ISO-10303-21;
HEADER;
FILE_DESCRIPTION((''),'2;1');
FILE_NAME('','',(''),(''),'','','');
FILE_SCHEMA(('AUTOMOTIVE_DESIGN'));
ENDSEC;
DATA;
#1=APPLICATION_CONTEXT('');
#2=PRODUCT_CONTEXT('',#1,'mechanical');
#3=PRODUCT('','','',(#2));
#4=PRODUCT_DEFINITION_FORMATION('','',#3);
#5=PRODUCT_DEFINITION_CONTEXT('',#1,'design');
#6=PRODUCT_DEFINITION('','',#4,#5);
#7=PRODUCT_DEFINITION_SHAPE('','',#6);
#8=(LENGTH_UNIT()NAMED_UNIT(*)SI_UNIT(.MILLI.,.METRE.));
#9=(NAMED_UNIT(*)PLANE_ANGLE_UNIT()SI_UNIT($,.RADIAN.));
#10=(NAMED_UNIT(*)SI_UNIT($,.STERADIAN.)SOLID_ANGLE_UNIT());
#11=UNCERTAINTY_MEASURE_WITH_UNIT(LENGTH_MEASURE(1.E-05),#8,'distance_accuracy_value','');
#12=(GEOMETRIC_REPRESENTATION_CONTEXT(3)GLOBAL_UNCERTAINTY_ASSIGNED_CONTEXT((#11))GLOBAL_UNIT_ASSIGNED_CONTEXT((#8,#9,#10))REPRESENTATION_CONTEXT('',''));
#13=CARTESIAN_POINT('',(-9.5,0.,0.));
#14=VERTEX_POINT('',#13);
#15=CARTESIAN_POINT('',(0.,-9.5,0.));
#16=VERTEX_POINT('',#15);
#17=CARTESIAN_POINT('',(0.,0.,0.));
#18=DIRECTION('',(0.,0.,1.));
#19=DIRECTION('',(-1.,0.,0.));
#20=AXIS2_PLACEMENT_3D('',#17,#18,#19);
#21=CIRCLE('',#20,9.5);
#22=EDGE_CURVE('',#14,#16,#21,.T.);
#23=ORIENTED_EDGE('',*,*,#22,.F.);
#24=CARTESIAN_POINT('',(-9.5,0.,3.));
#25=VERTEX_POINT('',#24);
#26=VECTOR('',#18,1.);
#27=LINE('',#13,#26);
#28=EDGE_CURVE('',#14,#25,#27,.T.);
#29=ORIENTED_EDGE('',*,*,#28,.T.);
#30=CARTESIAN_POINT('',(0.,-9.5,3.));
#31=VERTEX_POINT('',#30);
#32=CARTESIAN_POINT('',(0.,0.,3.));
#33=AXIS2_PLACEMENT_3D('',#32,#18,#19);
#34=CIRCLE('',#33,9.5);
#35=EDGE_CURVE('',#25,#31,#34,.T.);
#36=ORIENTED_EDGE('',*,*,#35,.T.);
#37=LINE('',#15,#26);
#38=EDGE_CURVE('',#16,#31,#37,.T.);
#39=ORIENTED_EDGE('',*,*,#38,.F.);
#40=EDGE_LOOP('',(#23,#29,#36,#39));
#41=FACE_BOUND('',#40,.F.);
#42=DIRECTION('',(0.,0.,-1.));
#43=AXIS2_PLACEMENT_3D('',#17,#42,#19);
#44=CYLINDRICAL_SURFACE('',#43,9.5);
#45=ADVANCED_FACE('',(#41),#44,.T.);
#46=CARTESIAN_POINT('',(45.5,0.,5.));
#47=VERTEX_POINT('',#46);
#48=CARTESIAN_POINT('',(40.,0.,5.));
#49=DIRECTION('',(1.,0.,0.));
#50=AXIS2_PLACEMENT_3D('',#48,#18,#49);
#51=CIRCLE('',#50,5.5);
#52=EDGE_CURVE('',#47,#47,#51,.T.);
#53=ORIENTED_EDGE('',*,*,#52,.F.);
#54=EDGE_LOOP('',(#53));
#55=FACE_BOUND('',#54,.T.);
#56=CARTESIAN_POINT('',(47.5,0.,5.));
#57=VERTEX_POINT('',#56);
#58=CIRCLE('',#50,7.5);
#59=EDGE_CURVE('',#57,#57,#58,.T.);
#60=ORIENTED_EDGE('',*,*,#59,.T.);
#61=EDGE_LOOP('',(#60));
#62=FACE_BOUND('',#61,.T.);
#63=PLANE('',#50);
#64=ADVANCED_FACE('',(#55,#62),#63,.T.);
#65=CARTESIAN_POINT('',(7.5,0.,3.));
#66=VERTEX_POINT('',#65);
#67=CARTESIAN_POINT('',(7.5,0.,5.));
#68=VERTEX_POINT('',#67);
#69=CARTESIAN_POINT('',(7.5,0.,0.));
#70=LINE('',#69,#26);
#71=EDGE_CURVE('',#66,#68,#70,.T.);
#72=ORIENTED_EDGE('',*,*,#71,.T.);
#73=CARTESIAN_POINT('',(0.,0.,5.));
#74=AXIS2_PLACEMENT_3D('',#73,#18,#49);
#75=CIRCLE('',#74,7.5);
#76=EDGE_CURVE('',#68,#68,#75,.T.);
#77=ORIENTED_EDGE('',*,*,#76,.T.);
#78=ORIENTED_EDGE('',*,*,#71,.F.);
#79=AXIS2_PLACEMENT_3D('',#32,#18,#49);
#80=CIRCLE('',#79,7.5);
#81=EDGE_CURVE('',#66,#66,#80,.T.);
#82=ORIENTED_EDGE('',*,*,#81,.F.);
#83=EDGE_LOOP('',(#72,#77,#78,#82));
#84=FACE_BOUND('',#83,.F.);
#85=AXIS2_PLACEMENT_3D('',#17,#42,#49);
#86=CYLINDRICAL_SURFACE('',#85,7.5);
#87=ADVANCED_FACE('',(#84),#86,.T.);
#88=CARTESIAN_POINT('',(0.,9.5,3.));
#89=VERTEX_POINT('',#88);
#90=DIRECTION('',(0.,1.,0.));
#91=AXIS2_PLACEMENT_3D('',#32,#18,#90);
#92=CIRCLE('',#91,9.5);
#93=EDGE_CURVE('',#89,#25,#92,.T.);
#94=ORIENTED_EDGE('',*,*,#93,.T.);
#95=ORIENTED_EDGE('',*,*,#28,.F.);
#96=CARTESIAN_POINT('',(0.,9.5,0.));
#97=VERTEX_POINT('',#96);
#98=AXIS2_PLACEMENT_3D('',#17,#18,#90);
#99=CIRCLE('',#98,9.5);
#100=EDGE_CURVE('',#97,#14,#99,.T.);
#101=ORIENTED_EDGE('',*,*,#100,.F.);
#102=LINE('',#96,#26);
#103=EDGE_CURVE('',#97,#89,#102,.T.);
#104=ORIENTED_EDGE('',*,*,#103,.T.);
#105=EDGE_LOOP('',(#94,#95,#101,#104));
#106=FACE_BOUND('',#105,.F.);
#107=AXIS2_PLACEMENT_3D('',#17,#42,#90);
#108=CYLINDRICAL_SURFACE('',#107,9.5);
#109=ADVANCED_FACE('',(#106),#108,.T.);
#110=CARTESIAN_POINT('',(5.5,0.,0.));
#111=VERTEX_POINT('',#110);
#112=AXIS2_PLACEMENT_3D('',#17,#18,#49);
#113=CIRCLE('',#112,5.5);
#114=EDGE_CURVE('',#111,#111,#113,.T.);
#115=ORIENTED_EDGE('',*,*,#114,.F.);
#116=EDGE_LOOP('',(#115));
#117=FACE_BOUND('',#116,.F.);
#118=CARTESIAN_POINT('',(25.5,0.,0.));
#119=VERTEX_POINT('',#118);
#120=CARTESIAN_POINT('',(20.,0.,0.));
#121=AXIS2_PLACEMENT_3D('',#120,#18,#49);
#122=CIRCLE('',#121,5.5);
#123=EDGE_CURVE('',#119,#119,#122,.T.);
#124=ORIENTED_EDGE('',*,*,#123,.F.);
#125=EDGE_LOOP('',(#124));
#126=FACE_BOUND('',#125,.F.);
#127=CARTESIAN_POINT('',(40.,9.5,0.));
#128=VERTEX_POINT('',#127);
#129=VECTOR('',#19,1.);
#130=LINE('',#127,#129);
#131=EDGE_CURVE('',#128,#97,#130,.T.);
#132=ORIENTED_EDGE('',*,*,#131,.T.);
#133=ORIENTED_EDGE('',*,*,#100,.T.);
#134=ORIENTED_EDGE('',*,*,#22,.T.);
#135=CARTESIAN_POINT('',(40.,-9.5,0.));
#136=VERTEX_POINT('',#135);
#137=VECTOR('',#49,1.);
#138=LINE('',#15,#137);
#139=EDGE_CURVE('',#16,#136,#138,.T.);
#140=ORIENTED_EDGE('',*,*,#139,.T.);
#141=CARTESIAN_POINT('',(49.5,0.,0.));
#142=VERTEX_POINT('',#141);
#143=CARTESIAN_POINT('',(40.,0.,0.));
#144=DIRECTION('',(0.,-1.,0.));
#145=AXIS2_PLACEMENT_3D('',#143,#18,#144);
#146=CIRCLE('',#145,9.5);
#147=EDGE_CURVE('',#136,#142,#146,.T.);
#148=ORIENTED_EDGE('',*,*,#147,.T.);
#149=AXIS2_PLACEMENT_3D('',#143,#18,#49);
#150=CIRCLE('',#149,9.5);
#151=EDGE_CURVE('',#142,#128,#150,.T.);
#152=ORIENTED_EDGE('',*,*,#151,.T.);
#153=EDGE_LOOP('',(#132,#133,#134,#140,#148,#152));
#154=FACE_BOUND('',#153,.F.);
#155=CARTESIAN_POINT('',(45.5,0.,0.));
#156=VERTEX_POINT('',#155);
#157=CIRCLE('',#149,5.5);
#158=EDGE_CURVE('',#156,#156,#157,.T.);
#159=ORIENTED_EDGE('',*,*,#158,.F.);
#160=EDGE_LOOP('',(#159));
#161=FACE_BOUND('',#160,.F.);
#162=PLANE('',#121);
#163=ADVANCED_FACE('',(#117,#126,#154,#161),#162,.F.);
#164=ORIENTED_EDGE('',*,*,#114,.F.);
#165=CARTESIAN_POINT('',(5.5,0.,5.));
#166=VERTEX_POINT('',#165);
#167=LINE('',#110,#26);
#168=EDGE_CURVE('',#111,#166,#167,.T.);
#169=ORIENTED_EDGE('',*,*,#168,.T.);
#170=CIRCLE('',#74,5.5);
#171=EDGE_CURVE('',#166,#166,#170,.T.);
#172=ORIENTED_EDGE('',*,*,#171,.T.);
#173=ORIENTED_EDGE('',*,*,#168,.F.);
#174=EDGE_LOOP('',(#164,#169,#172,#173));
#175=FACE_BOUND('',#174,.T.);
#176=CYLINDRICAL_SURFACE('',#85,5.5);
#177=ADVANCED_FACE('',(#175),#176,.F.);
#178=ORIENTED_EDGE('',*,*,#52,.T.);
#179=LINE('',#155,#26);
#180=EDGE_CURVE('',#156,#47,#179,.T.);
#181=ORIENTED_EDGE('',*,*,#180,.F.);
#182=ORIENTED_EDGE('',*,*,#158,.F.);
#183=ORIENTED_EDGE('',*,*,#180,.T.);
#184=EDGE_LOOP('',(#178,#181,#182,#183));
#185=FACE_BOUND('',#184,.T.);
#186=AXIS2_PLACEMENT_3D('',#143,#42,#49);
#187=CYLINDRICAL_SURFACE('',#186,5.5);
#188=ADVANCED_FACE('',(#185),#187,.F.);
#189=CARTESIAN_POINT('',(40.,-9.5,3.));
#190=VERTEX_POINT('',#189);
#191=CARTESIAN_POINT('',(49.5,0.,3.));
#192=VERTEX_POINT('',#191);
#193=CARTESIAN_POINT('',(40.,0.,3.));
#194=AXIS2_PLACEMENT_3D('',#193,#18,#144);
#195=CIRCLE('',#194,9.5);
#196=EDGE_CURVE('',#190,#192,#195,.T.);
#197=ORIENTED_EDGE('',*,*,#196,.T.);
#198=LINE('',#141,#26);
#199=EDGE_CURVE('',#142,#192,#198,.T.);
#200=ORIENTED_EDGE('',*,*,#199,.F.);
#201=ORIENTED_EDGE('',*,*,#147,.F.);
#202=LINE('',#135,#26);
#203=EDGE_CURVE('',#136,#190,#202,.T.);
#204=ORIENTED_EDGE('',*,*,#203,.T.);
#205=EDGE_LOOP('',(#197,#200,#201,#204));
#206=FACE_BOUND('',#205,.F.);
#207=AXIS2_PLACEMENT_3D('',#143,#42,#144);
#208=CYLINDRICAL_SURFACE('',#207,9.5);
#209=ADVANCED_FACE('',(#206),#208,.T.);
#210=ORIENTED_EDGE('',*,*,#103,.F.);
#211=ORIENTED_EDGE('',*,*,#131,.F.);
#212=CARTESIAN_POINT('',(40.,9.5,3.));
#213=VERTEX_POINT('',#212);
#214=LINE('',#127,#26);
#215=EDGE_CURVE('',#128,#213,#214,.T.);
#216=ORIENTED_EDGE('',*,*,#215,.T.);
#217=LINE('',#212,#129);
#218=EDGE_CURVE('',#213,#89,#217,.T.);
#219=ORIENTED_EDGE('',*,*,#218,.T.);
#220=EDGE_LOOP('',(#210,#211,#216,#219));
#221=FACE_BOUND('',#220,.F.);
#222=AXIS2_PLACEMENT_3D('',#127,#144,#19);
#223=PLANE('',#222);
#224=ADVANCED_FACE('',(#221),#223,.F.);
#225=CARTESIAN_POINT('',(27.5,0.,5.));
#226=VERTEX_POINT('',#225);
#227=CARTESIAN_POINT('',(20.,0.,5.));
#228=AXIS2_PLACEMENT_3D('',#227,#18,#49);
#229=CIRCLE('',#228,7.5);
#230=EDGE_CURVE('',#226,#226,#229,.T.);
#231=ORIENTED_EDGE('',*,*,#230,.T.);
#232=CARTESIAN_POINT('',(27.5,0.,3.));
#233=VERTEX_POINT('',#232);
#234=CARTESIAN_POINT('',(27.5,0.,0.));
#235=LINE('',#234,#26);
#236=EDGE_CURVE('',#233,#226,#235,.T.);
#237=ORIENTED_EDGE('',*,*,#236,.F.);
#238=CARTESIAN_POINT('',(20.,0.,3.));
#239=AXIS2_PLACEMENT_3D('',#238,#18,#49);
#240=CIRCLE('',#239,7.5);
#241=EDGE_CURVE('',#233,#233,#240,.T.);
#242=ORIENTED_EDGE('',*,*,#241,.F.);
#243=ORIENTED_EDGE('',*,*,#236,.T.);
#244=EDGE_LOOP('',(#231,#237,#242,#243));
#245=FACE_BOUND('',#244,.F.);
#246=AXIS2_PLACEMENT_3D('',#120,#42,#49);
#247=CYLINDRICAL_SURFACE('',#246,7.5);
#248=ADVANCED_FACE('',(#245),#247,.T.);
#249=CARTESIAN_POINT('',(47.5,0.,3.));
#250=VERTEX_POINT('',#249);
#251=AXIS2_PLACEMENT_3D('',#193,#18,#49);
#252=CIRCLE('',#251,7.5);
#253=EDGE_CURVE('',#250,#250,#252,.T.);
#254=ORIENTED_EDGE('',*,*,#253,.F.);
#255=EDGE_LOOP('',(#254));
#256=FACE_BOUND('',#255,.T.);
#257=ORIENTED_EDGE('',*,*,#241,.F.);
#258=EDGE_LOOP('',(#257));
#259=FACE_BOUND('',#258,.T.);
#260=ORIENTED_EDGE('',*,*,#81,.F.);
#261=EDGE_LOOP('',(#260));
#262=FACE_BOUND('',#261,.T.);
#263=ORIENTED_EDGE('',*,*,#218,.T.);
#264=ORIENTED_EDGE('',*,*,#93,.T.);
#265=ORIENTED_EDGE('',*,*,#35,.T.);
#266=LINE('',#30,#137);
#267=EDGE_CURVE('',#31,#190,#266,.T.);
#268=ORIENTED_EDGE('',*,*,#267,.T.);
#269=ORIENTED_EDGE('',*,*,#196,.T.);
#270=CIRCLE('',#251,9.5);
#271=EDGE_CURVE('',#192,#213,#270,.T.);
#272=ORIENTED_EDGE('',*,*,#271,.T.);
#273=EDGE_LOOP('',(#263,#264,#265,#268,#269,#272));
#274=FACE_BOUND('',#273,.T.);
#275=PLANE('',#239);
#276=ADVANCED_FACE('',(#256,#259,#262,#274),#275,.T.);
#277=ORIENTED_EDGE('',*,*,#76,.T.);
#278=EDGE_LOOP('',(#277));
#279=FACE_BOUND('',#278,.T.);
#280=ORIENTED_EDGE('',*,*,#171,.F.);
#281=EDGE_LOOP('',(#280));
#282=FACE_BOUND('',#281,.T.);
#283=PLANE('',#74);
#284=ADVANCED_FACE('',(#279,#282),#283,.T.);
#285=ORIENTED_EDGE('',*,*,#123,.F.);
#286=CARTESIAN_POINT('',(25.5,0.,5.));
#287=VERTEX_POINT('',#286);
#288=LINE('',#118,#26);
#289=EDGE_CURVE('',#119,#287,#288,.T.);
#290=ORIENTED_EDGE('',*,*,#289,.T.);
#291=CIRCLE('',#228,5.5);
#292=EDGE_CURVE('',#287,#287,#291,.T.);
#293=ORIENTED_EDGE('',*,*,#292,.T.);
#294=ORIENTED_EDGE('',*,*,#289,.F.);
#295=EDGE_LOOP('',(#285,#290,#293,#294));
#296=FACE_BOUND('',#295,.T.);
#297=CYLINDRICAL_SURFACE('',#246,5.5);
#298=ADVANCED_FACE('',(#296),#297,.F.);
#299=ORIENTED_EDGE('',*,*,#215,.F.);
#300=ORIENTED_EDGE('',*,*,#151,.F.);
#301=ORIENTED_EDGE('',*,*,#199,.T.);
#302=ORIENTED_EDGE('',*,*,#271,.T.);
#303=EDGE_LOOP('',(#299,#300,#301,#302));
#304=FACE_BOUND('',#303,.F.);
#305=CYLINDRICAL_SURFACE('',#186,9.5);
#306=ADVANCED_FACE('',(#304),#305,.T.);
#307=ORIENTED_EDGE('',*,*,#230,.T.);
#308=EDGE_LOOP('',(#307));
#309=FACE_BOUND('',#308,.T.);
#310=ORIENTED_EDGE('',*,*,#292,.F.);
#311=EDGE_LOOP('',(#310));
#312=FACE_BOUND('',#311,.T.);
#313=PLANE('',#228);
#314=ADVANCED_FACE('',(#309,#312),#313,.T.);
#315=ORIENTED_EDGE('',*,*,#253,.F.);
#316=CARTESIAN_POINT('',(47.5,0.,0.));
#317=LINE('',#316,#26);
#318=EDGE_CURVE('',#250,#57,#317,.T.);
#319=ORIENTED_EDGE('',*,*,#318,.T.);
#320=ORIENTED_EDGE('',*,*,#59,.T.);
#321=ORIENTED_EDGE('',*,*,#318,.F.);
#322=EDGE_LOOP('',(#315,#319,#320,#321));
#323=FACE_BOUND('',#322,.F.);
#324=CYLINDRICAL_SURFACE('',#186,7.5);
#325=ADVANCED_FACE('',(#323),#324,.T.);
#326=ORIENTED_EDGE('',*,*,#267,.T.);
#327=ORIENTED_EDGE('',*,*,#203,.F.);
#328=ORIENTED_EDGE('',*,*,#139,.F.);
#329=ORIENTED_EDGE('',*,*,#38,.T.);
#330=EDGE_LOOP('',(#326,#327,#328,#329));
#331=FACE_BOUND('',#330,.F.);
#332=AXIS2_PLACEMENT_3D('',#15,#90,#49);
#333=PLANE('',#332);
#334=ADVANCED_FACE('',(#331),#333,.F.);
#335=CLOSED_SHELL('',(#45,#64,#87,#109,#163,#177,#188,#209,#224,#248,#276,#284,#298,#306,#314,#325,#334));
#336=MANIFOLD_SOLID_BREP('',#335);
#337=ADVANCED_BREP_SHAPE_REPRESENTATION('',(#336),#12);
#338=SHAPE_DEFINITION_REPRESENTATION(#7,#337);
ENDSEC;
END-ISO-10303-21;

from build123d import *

# Parameters (mm, degrees)
F2_R     = 7.5
F3_DEPTH = 3
F2_R_2   = 5.5
F4_DEPTH = 5


# Not quite as in the source:
# - a feature names something its author has since deleted; it is built from what else it names


with BuildPart() as f3:
    # F2 (on Top) → F3 (new body)
    with BuildSketch(Plane.XY):
        with BuildLine():
            Line((40, 9.5), (0, 9.5))
            ThreePointArc((0, 9.5), (-6.7175144213, 6.7175144213), (-9.5, 0))
            ThreePointArc((-9.5, 0), (-6.7175144213, -6.7175144213), (0, -9.5))
            Line((0, -9.5), (40, -9.5))
            ThreePointArc((40, -9.5), (46.7175144213, -6.7175144213), (49.5, 0))
            ThreePointArc((49.5, 0), (46.7175144213, 6.7175144213), (40, 9.5))
        make_face()
        Circle(F2_R, mode=Mode.SUBTRACT)
        with Locations((20, 0)):
            Circle(F2_R, mode=Mode.SUBTRACT)
        with Locations((40, 0)):
            Circle(F2_R, mode=Mode.SUBTRACT)
    extrude(amount=F3_DEPTH)

    # F2 (on Top) → F4 (join)
    with BuildSketch(Plane.XY):
        Circle(F2_R)
        Circle(F2_R_2, mode=Mode.SUBTRACT)
        with Locations((20, 0)):
            Circle(F2_R)
        with Locations((20, 0)):
            Circle(F2_R_2, mode=Mode.SUBTRACT)
        with Locations((40, 0)):
            Circle(F2_R)
        with Locations((40, 0)):
            Circle(F2_R_2, mode=Mode.SUBTRACT)
    extrude(amount=F4_DEPTH)


solid = f3.part
